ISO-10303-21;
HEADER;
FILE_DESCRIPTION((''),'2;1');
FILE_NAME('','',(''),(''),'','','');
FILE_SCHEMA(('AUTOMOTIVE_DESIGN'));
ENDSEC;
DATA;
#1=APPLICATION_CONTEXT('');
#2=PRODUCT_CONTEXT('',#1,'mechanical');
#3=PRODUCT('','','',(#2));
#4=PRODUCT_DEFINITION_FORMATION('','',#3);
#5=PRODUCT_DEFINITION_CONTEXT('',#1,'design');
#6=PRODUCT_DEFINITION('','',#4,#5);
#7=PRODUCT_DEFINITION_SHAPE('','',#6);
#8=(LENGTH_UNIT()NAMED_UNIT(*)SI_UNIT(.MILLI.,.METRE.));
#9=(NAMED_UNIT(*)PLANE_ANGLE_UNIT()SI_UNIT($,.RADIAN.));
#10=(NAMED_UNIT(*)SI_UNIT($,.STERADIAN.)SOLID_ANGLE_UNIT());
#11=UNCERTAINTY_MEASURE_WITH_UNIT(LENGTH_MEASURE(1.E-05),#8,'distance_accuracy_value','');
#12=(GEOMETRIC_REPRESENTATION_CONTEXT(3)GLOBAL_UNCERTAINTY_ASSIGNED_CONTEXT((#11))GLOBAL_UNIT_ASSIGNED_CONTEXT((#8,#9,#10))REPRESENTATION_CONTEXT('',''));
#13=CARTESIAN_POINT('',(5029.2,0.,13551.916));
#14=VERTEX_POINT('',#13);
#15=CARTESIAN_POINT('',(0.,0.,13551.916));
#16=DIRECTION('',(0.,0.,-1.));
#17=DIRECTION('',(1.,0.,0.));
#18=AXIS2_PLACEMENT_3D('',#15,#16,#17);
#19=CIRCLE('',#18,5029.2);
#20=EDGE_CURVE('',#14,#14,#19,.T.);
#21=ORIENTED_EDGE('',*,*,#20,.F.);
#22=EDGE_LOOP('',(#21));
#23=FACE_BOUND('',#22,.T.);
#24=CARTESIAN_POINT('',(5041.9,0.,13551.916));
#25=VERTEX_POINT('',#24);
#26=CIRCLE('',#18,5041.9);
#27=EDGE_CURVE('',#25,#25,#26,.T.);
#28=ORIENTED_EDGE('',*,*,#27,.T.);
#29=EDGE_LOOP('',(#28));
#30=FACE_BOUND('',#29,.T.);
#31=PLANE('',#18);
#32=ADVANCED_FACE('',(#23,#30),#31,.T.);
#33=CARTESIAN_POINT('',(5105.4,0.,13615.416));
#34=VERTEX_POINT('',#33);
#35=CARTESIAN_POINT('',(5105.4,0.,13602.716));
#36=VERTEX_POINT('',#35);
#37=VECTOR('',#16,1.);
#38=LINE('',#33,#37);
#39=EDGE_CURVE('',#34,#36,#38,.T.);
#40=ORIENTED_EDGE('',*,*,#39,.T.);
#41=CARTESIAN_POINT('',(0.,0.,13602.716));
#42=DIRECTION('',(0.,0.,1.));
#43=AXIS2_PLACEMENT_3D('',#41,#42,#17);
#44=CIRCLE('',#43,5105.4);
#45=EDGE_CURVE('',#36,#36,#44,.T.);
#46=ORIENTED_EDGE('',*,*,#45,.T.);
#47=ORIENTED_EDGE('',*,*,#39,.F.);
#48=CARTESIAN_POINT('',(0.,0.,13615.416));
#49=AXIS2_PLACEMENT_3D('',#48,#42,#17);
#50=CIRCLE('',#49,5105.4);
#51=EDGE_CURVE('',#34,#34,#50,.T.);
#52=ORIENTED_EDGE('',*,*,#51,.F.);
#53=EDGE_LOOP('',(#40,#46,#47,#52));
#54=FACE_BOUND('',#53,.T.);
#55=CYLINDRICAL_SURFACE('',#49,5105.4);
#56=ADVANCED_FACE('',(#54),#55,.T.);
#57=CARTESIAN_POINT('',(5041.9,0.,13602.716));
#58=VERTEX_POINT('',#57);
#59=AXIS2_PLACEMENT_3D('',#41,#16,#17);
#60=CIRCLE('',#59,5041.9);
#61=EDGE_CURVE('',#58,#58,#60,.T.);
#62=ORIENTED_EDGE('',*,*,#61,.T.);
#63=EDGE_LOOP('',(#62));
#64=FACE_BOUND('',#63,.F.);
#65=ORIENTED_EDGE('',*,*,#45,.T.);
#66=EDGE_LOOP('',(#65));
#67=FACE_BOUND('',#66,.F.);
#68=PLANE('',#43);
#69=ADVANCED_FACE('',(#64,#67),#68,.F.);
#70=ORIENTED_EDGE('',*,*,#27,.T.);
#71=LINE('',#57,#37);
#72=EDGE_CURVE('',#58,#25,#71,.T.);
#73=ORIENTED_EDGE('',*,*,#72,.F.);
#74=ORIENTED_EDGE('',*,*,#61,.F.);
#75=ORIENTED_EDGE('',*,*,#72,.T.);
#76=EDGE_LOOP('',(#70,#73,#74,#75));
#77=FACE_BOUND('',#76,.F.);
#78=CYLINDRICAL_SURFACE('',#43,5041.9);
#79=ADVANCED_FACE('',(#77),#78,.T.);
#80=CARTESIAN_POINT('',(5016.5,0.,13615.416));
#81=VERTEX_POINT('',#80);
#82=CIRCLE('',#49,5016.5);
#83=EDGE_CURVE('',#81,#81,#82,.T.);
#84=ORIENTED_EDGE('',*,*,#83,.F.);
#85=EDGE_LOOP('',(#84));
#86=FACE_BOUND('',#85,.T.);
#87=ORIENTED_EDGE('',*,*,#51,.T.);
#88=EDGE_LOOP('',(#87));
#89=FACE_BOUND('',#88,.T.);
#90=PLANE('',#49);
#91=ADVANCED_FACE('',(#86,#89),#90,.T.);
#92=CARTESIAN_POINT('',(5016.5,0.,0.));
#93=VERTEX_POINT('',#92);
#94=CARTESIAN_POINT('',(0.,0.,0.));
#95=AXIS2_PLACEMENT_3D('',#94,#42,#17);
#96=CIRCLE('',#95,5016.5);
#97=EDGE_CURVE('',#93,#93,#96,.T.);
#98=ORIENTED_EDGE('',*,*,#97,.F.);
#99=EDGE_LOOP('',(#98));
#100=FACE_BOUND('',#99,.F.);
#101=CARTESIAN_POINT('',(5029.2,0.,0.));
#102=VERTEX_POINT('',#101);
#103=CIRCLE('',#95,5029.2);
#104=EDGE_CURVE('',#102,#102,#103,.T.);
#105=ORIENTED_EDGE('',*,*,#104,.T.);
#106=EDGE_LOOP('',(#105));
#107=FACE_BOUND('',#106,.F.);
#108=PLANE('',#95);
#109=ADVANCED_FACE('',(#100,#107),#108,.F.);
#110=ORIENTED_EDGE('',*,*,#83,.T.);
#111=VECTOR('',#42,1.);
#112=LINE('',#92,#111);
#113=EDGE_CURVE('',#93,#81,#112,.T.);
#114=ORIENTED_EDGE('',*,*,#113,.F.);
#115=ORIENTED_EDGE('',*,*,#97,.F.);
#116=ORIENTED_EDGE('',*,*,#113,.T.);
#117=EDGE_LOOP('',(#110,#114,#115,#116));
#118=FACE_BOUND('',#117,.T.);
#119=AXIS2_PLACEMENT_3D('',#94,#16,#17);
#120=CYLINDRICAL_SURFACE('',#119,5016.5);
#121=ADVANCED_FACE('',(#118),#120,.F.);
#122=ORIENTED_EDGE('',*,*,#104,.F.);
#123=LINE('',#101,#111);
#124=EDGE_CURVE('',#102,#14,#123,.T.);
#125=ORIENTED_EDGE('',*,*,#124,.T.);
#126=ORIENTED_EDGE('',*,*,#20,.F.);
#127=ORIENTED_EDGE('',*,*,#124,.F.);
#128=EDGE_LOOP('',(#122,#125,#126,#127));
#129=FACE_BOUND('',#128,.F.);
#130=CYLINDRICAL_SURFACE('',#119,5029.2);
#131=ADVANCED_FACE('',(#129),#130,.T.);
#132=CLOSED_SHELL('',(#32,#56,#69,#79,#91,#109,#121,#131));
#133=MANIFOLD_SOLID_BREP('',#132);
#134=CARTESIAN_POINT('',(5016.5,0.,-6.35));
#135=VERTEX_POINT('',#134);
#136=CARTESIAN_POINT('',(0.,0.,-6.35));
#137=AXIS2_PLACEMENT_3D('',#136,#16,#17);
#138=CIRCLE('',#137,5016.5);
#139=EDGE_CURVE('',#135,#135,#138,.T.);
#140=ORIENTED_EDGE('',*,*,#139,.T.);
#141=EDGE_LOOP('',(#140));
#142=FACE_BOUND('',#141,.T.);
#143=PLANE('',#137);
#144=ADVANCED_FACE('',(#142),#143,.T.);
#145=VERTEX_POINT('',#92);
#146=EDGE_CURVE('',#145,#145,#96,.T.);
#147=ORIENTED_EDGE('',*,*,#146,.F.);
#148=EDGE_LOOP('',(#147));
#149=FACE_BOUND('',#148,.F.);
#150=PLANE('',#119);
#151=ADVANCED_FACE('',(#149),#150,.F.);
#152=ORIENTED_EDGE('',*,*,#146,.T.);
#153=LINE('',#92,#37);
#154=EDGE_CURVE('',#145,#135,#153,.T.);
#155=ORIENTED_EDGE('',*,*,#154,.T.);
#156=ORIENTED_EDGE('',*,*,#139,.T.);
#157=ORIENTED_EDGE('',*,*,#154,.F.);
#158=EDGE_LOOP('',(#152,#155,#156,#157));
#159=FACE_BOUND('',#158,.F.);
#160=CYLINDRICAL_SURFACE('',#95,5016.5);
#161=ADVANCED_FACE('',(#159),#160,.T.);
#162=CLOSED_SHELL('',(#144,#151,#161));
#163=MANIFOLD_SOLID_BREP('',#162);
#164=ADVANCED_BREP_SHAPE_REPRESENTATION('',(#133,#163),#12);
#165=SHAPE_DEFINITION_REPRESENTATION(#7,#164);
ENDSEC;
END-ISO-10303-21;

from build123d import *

# Parameters (mm, degrees)
F0_R     = 5029.2
F0_R_2   = 5016.5
F1_DEPTH = 13615.416
F2_R     = 5016.5
F3_DEPTH = 6.35
F4_R     = 5105.4
F4_R_2   = 5029.2
F5_DEPTH = 12.7
F6_R     = 5041.9
F6_R_2   = 5029.2
F7_DEPTH = 50.8


with BuildPart() as f1:
    # F0 (on Top) → F1 (new body)
    with BuildSketch(Plane.XY):
        Circle(F0_R)
        Circle(F0_R_2, mode=Mode.SUBTRACT)
    extrude(amount=F1_DEPTH)

    # F4 (on face) → F5 (join)
    with BuildSketch(Plane.XY.offset(13615.416)):
        Circle(F4_R)
        Circle(F4_R_2, mode=Mode.SUBTRACT)
    extrude(amount=-F5_DEPTH)

    # F6 (on face) → F7 (join)
    with BuildSketch(Plane(origin=(0, 0, 13602.716), x_dir=(1, 0, 0), z_dir=(0, 0, -1))):
        Circle(F6_R)
        Circle(F6_R_2, mode=Mode.SUBTRACT)
    extrude(amount=F7_DEPTH)


with BuildPart() as f3:
    # F2 (on face) → F3 (new body)
    with BuildSketch(Plane(origin=(0, 0, 0), x_dir=(1, 0, 0), z_dir=(0, 0, -1))):
        Circle(F2_R)
    extrude(amount=F3_DEPTH)


with BuildPart() as f1_1:
    add(f1.part)

    # F8: union F3
    add(f3.part)


solid = f1_1.part
